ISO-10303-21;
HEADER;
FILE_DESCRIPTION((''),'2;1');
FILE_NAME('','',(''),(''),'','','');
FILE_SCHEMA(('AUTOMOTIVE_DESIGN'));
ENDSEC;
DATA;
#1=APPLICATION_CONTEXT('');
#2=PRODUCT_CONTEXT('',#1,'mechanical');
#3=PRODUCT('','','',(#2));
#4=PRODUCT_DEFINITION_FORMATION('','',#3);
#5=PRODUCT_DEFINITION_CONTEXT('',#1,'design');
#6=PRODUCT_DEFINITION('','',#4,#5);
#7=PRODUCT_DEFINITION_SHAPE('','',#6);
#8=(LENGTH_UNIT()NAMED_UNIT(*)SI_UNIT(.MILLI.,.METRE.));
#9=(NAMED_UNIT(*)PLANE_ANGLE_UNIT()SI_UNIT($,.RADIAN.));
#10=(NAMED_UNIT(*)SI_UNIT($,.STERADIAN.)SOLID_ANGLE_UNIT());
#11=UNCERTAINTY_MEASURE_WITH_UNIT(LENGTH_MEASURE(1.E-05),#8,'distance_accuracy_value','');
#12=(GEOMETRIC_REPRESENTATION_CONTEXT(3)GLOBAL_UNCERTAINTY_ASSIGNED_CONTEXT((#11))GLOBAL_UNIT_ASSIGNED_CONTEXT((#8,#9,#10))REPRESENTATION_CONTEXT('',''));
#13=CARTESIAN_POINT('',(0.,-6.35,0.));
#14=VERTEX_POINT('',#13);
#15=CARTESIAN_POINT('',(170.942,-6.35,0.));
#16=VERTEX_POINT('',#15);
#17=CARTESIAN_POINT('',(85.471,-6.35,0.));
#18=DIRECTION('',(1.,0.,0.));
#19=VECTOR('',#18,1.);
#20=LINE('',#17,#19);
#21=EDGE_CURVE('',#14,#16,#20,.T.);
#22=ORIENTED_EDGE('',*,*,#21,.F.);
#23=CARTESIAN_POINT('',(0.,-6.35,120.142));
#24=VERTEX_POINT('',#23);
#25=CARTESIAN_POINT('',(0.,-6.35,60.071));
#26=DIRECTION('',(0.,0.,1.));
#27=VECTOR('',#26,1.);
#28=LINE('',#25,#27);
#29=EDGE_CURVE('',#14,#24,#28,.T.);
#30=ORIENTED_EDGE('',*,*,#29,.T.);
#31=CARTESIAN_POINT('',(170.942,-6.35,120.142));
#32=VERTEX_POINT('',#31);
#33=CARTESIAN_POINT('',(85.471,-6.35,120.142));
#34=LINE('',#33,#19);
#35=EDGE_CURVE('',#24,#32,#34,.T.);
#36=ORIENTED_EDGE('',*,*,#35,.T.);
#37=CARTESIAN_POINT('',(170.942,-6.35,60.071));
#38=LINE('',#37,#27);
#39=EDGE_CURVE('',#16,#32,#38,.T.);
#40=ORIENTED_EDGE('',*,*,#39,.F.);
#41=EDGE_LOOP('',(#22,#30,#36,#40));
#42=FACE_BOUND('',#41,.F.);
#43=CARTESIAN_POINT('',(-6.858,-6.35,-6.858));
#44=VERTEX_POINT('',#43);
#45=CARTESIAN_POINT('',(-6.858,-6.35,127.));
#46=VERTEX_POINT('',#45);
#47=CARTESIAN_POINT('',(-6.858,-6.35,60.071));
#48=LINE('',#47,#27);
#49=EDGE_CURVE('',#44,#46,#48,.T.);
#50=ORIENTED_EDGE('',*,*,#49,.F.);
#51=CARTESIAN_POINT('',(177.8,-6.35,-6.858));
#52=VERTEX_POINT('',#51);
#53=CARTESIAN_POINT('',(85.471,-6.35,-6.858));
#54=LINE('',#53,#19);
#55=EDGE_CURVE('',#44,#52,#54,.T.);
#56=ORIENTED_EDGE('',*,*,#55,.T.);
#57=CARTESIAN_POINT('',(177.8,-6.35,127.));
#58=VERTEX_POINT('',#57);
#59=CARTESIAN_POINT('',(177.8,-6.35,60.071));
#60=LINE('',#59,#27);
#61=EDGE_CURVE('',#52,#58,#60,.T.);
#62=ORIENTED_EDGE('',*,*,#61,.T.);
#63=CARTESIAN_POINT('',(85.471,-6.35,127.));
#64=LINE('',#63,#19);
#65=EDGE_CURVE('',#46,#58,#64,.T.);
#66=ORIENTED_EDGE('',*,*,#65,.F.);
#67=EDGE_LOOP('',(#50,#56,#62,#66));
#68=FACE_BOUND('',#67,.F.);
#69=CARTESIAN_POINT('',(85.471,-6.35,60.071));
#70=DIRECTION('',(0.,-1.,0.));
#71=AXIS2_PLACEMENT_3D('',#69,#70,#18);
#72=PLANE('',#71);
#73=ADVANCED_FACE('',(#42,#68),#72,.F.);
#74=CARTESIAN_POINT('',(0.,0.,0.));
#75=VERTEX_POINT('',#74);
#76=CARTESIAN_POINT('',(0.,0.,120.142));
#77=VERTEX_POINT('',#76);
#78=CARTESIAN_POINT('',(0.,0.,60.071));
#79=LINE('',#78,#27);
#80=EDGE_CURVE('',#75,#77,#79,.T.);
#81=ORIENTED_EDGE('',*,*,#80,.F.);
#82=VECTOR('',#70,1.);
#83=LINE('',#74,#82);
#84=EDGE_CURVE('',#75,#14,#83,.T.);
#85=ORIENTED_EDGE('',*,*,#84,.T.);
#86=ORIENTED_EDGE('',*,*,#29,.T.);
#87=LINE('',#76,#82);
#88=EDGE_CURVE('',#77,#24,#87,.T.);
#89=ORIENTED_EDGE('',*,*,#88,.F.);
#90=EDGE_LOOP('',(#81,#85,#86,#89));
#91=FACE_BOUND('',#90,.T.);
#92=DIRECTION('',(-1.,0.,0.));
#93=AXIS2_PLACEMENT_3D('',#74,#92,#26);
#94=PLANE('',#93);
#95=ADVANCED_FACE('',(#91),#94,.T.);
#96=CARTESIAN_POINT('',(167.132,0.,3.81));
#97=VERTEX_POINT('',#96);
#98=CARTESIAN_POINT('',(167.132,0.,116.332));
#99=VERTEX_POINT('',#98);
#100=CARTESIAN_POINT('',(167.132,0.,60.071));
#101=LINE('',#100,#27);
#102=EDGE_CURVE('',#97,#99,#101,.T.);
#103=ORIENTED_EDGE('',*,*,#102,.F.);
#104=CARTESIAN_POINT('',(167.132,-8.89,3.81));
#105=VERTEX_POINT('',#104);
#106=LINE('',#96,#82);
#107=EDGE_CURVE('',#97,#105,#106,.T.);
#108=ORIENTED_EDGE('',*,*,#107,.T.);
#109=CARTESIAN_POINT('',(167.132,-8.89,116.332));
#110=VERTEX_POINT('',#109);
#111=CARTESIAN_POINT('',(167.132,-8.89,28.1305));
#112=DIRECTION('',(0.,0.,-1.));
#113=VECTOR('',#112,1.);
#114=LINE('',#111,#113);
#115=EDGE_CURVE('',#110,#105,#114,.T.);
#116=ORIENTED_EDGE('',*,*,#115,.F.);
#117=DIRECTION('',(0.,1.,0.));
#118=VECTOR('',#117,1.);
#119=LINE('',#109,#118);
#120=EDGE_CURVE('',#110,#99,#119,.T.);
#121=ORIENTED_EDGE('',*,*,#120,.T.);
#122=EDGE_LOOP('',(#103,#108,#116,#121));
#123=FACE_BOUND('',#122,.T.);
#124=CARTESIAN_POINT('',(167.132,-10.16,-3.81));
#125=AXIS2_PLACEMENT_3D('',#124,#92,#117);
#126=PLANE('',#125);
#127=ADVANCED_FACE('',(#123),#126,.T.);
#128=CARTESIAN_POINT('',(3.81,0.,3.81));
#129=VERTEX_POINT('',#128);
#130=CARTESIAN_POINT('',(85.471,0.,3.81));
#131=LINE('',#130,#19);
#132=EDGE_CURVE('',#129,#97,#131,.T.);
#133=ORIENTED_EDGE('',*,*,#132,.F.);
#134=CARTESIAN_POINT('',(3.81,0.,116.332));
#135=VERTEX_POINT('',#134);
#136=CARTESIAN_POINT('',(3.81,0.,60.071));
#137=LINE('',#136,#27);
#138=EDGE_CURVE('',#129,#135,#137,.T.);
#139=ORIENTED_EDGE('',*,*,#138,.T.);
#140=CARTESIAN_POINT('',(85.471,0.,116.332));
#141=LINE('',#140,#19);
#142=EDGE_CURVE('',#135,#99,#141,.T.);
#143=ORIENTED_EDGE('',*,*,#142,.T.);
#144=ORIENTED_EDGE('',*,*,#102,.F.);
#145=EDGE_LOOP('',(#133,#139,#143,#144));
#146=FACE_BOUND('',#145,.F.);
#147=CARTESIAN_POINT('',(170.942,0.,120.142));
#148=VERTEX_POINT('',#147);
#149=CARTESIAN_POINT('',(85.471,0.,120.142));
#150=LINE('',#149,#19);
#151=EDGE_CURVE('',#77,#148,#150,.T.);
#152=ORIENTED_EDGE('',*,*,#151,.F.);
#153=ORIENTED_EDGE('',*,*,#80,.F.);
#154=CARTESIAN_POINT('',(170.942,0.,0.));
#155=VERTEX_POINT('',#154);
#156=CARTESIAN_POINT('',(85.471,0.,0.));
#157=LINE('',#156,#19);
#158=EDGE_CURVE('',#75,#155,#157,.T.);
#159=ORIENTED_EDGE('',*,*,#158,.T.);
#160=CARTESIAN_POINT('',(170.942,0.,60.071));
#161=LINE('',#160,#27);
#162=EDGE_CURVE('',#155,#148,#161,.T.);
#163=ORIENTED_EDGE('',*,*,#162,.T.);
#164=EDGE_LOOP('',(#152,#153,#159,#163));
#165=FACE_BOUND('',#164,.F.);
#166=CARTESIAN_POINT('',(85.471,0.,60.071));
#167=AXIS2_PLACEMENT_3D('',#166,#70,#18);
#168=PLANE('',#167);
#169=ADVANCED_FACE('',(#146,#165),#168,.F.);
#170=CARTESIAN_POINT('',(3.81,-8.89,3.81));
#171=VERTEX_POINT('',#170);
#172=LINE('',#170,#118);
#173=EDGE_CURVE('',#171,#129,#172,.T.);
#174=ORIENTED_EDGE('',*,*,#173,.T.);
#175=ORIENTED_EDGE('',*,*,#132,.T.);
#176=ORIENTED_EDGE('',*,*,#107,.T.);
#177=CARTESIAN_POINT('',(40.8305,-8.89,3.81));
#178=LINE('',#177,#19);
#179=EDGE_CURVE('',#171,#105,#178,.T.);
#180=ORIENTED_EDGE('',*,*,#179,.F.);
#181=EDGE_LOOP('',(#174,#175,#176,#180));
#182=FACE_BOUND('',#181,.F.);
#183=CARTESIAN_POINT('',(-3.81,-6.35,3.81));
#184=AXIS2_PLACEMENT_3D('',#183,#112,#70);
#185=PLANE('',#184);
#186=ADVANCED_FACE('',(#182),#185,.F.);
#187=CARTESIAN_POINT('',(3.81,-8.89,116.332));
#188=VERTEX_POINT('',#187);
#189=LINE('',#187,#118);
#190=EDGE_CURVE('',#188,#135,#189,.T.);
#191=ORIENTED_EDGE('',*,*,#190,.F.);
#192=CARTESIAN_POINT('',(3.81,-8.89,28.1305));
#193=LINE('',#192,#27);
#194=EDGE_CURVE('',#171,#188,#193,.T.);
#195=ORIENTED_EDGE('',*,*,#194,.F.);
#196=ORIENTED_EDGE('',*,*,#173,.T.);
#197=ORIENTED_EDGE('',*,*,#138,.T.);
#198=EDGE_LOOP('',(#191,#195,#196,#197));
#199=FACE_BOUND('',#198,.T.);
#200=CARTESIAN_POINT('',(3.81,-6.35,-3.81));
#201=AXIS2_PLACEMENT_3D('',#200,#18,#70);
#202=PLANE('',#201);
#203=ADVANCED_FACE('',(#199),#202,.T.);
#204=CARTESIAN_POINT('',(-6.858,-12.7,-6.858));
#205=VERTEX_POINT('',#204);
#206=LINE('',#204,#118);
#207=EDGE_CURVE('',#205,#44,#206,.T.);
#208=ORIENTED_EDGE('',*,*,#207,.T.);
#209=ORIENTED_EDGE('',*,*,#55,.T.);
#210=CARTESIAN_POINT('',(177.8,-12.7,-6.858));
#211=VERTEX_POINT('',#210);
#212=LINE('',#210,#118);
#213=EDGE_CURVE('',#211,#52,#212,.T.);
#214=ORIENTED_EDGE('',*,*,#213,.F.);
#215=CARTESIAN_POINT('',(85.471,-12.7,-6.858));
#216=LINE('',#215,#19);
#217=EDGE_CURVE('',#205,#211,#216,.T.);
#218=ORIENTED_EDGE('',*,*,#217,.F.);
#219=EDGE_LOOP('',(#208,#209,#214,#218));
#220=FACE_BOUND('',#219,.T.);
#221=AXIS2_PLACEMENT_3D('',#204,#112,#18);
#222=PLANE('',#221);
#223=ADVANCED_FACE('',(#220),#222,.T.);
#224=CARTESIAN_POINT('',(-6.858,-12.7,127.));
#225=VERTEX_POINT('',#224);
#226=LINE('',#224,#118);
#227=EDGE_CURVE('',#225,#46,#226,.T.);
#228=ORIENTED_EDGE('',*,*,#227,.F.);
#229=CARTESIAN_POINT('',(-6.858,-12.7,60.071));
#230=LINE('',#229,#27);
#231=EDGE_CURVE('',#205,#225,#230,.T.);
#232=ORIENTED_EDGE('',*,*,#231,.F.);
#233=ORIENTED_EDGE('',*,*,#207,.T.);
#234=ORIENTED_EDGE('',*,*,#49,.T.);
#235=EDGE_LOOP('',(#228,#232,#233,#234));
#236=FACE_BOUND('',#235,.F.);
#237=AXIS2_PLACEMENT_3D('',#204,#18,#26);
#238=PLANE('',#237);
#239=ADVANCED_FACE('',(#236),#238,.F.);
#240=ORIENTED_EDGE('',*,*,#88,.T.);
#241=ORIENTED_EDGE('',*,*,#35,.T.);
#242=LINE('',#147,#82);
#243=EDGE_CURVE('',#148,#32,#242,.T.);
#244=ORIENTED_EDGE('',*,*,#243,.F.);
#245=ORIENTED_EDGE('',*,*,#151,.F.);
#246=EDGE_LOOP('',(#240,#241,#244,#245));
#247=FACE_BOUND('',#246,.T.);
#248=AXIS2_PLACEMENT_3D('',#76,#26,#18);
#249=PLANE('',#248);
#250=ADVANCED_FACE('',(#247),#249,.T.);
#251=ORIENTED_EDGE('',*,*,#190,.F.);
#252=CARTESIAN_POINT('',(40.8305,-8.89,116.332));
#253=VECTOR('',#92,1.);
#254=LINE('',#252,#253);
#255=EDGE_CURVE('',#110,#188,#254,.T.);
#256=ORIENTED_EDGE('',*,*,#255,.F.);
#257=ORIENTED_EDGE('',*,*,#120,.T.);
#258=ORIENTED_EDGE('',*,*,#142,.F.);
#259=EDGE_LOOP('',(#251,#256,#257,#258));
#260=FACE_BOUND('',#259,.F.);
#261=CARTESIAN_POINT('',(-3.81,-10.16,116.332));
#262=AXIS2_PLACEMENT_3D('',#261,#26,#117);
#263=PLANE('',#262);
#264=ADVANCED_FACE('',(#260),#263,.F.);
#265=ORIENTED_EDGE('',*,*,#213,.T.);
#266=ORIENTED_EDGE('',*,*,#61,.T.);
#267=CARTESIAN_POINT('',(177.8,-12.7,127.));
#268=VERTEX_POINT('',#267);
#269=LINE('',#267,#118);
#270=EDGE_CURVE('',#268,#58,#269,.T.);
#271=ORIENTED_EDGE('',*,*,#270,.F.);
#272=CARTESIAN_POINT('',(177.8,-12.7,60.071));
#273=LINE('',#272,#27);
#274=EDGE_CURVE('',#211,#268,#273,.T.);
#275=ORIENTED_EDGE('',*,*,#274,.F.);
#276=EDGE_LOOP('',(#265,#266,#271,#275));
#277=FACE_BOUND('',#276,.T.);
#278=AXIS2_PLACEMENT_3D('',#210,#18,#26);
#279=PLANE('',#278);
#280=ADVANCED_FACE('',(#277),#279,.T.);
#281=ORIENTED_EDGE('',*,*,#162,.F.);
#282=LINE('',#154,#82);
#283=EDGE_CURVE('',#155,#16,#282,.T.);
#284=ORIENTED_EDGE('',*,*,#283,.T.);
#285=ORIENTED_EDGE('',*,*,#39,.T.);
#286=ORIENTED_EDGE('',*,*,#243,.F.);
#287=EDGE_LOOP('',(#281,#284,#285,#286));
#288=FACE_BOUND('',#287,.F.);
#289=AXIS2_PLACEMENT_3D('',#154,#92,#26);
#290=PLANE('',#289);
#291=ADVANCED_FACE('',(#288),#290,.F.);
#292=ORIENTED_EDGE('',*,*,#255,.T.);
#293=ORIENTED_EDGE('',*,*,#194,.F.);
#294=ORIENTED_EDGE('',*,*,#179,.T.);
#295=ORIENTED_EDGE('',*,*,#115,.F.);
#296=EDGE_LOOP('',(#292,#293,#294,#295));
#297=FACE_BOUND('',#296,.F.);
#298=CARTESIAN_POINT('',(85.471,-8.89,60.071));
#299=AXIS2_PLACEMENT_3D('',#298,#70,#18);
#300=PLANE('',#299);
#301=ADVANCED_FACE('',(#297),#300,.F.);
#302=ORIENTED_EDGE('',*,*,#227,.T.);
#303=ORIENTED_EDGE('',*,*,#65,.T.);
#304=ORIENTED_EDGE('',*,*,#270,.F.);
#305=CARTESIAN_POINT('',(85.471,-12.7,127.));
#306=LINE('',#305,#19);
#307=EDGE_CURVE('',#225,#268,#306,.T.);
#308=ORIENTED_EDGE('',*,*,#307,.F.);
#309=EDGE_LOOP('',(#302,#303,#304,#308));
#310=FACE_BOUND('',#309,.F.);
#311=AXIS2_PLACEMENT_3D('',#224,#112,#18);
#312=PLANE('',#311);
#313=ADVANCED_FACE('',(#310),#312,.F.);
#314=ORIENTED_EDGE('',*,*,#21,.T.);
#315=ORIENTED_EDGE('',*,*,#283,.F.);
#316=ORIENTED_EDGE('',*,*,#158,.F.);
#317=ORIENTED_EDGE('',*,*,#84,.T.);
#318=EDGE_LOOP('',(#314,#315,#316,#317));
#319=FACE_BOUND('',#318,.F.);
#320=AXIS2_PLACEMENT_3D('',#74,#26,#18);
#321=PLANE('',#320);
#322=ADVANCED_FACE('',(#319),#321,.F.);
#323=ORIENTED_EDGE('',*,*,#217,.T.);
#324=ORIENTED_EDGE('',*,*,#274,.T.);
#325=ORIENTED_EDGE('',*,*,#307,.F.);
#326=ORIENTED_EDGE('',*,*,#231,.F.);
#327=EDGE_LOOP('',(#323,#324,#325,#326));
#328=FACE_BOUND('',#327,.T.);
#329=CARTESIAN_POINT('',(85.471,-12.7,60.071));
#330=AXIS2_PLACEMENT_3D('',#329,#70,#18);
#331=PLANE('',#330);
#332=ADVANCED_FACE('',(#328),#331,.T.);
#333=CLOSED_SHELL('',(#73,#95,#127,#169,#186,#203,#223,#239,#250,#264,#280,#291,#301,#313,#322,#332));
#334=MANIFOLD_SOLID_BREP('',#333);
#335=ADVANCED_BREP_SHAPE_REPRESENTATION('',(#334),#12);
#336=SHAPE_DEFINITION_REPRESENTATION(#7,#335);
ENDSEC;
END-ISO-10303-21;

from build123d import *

# Parameters (mm, degrees)
F0_W        = 170.942
F0_H        = 120.142
F1_DEPTH    = 12.7
F2_W        = 184.658
F2_H        = 133.858
F2_W_2      = 170.942
F2_H_2      = 120.142
F3_DEPTH    = 6.35
F4_T        = 3.81
F4_T3_DEPTH = 127.762
F4_T5_DEPTH = 178.562


# Not quite as in the source:
# - a shell that OpenCascade refuses in one call is made with other operations: the cavity is built on its own and cut out


with BuildPart() as f1:
    # F0 (on Front) → F1 (new body)
    with BuildSketch(Plane.XZ):
        with Locations((85.471, 60.071)):
            Rectangle(F0_W, F0_H)
    extrude(amount=F1_DEPTH)

    # F2 (on face) → F3 (join)
    with BuildSketch(Plane.XZ.offset(12.7)):
        with Locations((85.471, 60.071)):
            Rectangle(F2_W, F2_H)
        with Locations((85.471, 60.071)):
            Rectangle(F2_W_2, F2_H_2, mode=Mode.SUBTRACT)
    extrude(amount=-F3_DEPTH)

    # F4: shell of thickness 3.81, made by hand


with BuildPart() as f4_core1:
    # F4_t2: copy of F1
    add(f1.part)

    # the walls: a layer under each face that stays
    f4_faces = [f4_core1.faces().sort_by_distance(p)[0] for p in [
        (0, -3.175, 60.071),
        (85.471, -3.175, 0),
        (-0.7027333333, -6.35, -2.3960666667),
        (85.471, -3.175, 120.142),
        (170.942, -3.175, 60.071),
        (-6.858, -9.525, 60.071),
        (85.471, -9.525, -6.858),
        (177.8, -9.525, 60.071),
        (85.471, -9.525, 127),
        (85.471, -12.7, 60.071),
    ]]
    thicken(f4_faces, amount=-F4_T, mode=Mode.SUBTRACT)

    # F4_s4 → F4_t3 (cut)
    with BuildSketch(Plane.XY.offset(-3.81)):
        Polygon((-0.0381, -6.3119), (3.81, -6.35), (3.81, -10.16), (0, -10.16), align=None)
        Polygon((170.9801, -6.3119), (170.942, -10.16), (167.132, -10.16), (167.132, -6.35), align=None)
    extrude(amount=F4_T3_DEPTH, mode=Mode.SUBTRACT)

    # F4_s6 → F4_t5 (cut)
    with BuildSketch(Plane.YZ.offset(-3.81)):
        Polygon((-6.3119, -0.0381), (-6.35, 3.81), (-10.16, 3.81), (-10.16, 0), align=None)
        Polygon((-6.3119, 120.1801), (-10.16, 120.142), (-10.16, 116.332), (-6.35, 116.332), align=None)
    extrude(amount=F4_T5_DEPTH, mode=Mode.SUBTRACT)


with BuildPart() as f1_1:
    add(f1.part)

    # what is left inside the walls is the cavity
    f4_cavity = [f4_core1.part.solids().sort_by_distance(p)[0] for p in [
        (85.471, -8.8519, 41.317333),
    ]]
    add(f4_cavity, mode=Mode.SUBTRACT)


solid = f1_1.part
